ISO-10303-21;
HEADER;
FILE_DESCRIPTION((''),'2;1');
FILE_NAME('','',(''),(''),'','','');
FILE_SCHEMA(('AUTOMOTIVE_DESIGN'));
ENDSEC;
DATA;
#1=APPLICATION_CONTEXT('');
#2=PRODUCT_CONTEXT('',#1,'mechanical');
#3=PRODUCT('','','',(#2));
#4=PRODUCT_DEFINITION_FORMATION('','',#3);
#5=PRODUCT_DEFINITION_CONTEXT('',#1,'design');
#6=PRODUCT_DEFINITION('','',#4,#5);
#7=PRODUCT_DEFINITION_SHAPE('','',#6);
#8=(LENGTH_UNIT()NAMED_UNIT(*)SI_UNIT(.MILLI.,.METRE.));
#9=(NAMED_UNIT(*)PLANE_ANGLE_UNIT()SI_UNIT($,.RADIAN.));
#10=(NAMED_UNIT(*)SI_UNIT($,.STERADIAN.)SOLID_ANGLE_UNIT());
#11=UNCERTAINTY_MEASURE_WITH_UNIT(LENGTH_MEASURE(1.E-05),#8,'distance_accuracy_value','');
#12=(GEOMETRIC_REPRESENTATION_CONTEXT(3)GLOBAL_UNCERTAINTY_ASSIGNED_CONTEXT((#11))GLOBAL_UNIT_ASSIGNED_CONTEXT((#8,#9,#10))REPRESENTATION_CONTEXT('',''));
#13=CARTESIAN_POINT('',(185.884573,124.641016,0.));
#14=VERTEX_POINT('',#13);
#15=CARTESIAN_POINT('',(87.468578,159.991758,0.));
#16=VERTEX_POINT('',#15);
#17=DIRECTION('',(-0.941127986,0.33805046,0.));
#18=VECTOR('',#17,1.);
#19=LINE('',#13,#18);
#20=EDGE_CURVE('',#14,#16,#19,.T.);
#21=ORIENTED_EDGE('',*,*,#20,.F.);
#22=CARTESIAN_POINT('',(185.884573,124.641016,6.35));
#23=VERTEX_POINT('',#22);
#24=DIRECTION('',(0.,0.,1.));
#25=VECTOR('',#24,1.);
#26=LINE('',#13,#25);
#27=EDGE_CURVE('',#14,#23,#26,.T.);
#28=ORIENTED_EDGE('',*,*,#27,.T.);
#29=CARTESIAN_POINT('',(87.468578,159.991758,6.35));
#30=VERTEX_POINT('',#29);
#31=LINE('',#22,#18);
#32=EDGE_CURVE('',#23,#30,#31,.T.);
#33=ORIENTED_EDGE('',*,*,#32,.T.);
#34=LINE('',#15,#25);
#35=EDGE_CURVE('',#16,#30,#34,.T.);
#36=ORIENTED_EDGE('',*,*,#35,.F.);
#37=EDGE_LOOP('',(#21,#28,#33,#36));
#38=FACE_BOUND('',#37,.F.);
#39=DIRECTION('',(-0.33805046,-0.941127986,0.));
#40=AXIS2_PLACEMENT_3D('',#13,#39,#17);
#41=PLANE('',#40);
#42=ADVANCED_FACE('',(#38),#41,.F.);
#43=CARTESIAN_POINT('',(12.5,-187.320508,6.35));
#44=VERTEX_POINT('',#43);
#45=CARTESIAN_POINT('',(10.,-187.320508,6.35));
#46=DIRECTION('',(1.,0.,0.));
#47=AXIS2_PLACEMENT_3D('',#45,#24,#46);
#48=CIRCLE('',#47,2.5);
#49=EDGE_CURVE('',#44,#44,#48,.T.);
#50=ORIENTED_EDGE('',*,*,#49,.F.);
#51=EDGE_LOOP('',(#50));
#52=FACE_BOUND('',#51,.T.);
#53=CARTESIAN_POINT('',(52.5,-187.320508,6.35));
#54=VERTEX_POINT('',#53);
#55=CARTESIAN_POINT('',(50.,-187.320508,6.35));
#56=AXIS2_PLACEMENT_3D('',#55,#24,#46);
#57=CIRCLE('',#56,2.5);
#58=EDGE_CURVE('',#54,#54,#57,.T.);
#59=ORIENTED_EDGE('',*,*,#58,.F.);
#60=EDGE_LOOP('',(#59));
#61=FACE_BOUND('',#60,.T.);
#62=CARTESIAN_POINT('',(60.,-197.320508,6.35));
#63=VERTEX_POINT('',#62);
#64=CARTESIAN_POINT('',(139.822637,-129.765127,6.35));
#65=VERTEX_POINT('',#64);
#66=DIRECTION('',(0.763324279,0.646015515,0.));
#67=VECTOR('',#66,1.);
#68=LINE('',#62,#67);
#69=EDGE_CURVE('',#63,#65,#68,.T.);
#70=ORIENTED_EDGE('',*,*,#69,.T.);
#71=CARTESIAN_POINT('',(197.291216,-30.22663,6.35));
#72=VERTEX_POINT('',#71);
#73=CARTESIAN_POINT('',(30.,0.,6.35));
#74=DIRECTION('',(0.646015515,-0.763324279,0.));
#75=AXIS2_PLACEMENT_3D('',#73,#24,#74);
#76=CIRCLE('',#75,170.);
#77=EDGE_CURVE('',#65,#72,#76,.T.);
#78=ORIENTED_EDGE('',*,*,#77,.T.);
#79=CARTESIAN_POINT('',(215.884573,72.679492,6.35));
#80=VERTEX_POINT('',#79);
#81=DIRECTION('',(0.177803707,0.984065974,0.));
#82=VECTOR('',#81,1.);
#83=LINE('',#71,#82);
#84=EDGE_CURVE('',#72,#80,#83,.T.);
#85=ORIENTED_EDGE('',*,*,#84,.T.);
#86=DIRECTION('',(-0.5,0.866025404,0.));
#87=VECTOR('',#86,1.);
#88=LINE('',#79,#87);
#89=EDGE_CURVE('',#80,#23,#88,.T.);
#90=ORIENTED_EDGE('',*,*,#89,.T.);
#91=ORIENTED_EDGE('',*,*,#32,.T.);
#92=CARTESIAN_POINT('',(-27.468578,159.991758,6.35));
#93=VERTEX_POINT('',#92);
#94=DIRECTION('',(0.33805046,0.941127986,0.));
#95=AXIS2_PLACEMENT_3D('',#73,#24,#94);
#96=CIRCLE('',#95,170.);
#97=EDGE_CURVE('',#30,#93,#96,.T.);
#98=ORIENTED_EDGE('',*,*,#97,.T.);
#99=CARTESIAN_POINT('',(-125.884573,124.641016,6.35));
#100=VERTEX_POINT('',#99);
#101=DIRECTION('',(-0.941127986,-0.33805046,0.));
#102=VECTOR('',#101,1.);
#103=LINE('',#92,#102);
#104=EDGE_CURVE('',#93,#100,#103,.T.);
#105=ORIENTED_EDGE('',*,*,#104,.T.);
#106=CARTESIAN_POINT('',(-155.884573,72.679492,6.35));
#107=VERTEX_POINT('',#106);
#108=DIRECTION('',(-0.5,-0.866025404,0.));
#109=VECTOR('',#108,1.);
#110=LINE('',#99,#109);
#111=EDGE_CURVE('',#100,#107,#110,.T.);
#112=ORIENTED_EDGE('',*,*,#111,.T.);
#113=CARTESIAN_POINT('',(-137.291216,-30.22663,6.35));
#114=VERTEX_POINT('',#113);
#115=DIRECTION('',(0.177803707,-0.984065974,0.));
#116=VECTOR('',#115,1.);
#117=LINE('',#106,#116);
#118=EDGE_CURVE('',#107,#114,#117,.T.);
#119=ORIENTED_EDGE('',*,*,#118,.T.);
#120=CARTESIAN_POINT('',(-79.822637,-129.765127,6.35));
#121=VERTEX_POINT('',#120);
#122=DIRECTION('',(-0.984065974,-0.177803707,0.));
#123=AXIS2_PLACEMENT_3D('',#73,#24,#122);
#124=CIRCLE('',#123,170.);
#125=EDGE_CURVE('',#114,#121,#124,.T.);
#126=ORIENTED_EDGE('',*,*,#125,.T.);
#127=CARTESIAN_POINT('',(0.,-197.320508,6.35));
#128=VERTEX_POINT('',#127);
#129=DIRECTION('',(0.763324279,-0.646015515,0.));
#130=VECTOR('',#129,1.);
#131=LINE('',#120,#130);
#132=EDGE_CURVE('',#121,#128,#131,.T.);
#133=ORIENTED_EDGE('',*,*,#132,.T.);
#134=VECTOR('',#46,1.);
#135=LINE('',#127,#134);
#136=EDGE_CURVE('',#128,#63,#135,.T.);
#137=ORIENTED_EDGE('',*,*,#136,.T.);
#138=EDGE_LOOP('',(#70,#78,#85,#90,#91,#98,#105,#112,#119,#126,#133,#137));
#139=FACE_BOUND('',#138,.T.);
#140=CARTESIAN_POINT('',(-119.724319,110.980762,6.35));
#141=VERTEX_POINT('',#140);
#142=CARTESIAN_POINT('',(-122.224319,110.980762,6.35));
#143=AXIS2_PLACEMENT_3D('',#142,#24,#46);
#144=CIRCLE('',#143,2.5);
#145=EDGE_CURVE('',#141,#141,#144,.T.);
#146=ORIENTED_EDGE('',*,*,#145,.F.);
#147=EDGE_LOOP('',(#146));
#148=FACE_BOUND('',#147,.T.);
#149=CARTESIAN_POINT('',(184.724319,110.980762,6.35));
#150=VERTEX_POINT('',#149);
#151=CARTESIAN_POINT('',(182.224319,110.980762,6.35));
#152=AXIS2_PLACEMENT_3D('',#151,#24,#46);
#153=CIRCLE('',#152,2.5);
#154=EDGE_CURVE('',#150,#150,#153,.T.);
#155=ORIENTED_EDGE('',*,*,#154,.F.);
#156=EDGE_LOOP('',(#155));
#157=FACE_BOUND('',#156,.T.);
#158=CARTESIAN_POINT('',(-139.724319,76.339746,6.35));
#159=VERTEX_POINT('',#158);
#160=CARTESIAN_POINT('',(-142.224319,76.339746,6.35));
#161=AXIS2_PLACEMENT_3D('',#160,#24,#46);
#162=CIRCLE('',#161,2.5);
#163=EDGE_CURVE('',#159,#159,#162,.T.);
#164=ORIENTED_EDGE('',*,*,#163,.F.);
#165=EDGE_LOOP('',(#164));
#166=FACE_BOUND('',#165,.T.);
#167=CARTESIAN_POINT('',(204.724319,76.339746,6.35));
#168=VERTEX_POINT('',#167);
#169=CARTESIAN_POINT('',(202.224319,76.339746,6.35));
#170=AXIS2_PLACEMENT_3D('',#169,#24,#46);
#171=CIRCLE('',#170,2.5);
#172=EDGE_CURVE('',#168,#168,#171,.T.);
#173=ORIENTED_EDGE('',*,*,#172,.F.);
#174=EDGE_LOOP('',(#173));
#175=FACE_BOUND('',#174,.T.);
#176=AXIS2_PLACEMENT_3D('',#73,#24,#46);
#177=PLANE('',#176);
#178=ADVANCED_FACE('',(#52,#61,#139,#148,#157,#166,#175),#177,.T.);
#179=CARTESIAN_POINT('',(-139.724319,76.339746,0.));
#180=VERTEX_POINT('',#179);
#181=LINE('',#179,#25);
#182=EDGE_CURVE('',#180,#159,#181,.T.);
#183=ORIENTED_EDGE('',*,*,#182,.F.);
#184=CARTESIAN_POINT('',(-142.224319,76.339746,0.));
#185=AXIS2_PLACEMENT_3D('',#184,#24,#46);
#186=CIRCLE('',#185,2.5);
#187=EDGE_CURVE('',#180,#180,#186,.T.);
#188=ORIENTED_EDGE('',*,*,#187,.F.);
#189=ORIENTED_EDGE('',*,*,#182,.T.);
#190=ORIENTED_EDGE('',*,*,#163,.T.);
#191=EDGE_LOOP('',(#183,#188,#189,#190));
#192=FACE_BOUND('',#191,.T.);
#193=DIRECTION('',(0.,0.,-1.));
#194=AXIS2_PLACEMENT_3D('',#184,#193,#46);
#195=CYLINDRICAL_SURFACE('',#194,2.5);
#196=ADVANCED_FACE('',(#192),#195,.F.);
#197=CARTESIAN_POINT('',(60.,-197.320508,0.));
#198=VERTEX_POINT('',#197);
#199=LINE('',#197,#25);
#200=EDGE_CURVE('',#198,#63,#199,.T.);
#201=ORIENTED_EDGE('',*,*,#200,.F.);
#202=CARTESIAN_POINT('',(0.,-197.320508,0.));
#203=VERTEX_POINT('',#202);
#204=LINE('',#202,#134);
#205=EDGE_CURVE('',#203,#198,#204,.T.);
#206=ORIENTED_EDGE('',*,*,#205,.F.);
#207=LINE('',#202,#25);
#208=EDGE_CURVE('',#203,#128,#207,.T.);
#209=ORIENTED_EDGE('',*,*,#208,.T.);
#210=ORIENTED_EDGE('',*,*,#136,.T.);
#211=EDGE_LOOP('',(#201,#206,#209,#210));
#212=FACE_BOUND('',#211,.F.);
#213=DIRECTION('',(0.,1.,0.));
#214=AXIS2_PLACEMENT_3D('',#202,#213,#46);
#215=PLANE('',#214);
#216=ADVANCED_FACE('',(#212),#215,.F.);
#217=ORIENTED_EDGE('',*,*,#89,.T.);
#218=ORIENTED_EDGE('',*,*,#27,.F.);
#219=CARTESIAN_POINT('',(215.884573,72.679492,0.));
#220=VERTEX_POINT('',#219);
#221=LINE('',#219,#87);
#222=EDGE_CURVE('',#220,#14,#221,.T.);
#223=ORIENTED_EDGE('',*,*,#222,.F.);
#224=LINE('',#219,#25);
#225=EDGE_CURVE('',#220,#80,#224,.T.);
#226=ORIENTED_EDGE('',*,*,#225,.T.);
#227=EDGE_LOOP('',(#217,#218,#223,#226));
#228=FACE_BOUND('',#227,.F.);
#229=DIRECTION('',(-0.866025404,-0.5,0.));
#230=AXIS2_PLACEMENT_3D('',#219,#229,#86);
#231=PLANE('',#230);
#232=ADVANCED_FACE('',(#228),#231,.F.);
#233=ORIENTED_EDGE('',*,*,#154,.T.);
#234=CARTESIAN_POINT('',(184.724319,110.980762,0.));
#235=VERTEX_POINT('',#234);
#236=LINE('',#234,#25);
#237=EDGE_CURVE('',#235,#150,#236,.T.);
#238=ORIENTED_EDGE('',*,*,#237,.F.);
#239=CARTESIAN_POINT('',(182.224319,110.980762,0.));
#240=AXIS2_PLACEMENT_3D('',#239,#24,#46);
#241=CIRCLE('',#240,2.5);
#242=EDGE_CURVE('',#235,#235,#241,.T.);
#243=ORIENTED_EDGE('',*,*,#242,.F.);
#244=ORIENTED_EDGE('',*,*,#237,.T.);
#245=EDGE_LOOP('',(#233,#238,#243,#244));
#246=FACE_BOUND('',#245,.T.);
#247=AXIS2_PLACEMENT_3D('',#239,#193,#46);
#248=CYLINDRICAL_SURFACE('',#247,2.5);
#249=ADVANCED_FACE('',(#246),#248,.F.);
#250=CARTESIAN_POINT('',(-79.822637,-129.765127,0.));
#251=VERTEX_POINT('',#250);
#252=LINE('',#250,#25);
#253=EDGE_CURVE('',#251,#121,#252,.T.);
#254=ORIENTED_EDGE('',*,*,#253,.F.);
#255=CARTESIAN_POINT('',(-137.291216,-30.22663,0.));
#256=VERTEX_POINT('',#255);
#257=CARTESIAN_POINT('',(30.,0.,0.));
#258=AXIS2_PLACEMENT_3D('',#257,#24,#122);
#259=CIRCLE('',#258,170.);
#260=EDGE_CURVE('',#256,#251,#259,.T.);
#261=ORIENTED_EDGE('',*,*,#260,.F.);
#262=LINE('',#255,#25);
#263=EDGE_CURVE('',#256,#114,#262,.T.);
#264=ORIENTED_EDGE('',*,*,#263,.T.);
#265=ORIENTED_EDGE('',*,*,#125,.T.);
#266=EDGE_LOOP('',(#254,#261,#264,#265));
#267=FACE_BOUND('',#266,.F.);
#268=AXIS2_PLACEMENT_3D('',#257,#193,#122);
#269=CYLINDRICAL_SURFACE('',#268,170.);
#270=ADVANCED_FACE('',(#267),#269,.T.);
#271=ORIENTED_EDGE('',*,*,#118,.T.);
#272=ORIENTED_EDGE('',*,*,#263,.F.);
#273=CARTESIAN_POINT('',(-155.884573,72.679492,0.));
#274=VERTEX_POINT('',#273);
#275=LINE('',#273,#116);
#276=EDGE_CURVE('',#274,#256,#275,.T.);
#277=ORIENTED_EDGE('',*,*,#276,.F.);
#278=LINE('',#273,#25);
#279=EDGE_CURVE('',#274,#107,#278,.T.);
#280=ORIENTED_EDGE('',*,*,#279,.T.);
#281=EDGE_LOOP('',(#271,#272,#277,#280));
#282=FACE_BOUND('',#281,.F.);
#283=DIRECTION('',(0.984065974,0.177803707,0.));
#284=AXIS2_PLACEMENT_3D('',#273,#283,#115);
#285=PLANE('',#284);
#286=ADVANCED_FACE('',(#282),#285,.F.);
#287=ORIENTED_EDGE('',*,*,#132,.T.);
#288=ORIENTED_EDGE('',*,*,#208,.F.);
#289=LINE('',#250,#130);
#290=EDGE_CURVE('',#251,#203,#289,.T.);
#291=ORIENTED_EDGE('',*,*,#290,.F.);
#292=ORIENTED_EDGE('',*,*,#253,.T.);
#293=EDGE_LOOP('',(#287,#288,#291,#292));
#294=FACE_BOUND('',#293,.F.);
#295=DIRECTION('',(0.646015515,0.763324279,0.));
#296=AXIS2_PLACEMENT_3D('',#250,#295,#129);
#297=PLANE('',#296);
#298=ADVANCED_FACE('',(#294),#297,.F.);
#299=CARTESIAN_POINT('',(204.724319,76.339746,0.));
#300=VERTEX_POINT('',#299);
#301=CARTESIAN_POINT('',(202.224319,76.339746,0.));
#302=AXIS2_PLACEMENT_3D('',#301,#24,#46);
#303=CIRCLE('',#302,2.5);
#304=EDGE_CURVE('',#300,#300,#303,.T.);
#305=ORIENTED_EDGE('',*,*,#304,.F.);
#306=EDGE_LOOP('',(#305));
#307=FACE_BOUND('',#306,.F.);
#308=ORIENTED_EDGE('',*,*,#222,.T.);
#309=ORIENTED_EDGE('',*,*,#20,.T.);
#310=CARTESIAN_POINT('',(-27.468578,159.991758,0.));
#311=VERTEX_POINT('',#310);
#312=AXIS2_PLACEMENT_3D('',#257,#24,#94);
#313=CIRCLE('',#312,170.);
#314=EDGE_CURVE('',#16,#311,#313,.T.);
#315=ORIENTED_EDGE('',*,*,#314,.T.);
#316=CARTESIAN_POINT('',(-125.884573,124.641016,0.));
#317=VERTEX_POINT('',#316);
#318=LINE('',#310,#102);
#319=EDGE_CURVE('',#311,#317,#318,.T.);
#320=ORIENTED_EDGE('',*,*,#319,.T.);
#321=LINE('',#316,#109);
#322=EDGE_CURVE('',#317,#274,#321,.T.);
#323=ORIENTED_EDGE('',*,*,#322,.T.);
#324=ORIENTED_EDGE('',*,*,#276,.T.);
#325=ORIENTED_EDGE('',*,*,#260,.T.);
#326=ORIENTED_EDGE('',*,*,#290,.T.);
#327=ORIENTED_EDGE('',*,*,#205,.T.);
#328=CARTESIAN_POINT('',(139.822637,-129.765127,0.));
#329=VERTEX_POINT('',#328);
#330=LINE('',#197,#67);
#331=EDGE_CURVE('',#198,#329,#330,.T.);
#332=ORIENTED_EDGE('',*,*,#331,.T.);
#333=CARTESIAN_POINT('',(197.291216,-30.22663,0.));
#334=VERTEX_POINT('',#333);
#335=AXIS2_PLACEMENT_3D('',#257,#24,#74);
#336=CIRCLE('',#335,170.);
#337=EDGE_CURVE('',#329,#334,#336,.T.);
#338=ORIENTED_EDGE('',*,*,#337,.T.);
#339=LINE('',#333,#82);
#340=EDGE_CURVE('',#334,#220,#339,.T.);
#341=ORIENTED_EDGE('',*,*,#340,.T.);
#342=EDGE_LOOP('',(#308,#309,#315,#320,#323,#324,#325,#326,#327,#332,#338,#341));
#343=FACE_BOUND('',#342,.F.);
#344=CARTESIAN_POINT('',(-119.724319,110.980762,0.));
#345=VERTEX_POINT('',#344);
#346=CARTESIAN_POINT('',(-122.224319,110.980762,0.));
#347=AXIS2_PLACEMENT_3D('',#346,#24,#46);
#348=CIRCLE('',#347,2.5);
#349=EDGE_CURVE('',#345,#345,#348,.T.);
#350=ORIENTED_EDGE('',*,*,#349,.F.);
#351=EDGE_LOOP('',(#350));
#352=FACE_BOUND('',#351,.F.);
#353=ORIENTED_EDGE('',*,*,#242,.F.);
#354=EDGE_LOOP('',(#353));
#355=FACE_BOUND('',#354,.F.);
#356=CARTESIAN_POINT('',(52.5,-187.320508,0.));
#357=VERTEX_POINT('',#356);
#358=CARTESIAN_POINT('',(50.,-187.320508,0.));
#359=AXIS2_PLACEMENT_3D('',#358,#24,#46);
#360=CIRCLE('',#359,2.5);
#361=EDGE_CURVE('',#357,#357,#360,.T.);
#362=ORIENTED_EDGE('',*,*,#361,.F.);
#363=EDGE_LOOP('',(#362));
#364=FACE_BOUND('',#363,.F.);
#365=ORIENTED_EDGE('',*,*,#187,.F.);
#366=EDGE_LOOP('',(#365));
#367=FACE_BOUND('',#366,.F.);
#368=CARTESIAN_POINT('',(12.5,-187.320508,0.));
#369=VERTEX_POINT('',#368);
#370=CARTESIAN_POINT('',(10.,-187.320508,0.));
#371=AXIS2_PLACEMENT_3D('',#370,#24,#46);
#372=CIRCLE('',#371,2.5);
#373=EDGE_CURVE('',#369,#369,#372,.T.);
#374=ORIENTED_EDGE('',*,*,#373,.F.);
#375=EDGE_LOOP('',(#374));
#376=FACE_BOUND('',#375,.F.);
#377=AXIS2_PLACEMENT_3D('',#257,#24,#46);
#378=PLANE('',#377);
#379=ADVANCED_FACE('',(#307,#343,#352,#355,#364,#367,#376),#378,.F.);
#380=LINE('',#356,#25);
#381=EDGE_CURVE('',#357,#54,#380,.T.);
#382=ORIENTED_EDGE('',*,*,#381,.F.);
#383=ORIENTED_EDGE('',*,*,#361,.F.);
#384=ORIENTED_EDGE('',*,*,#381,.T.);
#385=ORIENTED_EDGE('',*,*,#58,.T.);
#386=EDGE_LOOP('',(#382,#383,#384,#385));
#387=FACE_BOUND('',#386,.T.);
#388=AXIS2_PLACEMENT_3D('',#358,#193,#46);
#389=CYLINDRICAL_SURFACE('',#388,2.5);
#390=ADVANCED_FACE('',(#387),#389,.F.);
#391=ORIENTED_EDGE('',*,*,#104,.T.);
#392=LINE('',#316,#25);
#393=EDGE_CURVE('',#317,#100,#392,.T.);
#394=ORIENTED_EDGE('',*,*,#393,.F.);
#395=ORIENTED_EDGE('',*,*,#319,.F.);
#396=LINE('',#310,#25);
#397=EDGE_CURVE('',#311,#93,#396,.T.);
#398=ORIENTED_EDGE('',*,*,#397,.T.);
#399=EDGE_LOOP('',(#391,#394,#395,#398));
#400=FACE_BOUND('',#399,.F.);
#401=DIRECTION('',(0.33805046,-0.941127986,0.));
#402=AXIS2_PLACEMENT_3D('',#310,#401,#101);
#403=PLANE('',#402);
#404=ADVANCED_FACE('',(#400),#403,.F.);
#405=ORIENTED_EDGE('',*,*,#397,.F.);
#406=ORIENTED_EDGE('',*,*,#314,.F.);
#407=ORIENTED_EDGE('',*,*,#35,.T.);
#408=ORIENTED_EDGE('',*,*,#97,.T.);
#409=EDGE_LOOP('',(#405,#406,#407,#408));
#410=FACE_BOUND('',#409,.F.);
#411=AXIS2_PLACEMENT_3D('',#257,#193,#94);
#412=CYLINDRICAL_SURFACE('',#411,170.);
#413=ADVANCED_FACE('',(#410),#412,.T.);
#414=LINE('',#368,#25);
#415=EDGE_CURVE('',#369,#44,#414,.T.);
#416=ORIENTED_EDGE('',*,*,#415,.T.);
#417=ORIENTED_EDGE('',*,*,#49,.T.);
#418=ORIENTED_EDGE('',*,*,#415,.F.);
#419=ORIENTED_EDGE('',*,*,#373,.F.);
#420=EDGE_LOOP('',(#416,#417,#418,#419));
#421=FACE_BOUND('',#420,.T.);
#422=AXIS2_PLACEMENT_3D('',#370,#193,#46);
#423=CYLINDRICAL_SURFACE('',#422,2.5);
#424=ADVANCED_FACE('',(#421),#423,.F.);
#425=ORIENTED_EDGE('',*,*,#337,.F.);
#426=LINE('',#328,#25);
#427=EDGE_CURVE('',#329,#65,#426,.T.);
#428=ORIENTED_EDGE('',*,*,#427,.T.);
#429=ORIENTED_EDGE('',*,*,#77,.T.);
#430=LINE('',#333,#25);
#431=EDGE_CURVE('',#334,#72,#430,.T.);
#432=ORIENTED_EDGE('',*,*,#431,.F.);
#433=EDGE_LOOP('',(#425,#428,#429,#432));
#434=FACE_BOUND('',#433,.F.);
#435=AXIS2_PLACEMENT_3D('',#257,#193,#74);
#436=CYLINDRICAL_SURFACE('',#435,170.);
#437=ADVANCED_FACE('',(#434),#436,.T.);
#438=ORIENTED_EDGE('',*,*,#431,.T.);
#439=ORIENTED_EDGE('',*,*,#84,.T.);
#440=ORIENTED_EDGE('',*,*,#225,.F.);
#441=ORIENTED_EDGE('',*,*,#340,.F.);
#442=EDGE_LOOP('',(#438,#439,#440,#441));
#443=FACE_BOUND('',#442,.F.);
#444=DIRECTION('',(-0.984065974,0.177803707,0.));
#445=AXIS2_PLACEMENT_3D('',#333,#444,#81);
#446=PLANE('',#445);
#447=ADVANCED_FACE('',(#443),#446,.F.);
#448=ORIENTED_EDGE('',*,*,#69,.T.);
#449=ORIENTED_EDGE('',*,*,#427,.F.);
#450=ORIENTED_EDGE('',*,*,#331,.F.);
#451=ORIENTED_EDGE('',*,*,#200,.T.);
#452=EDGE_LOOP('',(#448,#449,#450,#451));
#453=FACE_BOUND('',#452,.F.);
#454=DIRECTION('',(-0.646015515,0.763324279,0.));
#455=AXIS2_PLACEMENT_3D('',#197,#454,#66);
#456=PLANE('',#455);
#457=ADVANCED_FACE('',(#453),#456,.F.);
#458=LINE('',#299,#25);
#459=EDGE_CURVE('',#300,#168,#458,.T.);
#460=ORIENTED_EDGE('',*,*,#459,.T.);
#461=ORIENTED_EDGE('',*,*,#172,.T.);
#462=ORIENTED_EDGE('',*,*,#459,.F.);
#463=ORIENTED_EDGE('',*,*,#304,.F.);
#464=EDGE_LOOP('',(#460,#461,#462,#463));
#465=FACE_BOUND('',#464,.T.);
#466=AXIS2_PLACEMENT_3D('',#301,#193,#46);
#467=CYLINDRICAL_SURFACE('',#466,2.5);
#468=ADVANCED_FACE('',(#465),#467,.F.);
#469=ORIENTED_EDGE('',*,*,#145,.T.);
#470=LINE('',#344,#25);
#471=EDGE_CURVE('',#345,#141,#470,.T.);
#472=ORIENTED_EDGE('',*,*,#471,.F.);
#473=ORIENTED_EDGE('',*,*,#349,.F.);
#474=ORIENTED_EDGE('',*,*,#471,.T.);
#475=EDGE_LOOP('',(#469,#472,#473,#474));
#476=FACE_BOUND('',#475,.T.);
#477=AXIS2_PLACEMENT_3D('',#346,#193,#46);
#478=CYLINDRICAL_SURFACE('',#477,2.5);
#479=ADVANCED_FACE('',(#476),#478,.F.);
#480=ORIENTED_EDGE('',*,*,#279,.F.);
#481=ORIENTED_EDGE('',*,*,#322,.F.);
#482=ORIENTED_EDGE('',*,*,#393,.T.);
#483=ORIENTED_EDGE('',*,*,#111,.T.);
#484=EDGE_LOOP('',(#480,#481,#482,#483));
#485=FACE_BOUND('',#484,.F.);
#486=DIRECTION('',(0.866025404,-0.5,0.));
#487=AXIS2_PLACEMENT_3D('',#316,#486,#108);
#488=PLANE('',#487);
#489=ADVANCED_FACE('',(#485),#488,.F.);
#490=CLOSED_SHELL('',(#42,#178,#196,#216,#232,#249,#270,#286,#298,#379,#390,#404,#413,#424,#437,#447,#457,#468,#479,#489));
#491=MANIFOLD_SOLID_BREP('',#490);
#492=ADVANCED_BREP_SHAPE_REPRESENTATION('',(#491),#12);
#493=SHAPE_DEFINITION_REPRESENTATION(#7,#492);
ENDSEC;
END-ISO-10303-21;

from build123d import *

# Parameters (mm, degrees)
F0_R     = 2.5
F1_DEPTH = 6.35


# Not quite as in the source:
# - a length typed as a fraction of an inch, garbled in the dataset ("3 / 203.2 mm" for 3/8 in), is restored


with BuildPart() as f1:
    # F0 (on Top) → F1 (new body)
    with BuildSketch(Plane.XY):
        with BuildLine():
            Line((-79.8226374756, -129.7651274337), (0, -197.3205080757))
            Line((0, -197.3205080757), (60, -197.3205080757))
            Line((60, -197.3205080757), (139.8226374756, -129.7651274337))
            ThreePointArc((139.8226374756, -129.7651274337), (177.2243186434, -85), (197.2912156208, -30.2266302477))
            Line((197.2912156208, -30.2266302477), (215.8845726812, 72.6794919243))
            Line((215.8845726812, 72.6794919243), (185.8845726812, 124.6410161514))
            Line((185.8845726812, 124.6410161514), (87.4685781451, 159.9917576814))
            ThreePointArc((87.4685781451, 159.9917576814), (30, 170), (-27.4685781451, 159.9917576814))
            Line((-27.4685781451, 159.9917576814), (-125.8845726812, 124.6410161514))
            Line((-125.8845726812, 124.6410161514), (-155.8845726812, 72.6794919243))
            Line((-155.8845726812, 72.6794919243), (-137.2912156208, -30.2266302477))
            ThreePointArc((-137.2912156208, -30.2266302477), (-117.2243186434, -85), (-79.8226374756, -129.7651274337))
        make_face()
        with Locations((10, -187.3205080757)):
            Circle(F0_R, mode=Mode.SUBTRACT)
        with Locations((50, -187.3205080757)):
            Circle(F0_R, mode=Mode.SUBTRACT)
        with Locations((-142.2243186434, 76.3397459622)):
            Circle(F0_R, mode=Mode.SUBTRACT)
        with Locations((-122.2243186434, 110.9807621135)):
            Circle(F0_R, mode=Mode.SUBTRACT)
        with Locations((202.2243186434, 76.3397459622)):
            Circle(F0_R, mode=Mode.SUBTRACT)
        with Locations((182.2243186434, 110.9807621135)):
            Circle(F0_R, mode=Mode.SUBTRACT)
    extrude(amount=F1_DEPTH)


solid = f1.part
